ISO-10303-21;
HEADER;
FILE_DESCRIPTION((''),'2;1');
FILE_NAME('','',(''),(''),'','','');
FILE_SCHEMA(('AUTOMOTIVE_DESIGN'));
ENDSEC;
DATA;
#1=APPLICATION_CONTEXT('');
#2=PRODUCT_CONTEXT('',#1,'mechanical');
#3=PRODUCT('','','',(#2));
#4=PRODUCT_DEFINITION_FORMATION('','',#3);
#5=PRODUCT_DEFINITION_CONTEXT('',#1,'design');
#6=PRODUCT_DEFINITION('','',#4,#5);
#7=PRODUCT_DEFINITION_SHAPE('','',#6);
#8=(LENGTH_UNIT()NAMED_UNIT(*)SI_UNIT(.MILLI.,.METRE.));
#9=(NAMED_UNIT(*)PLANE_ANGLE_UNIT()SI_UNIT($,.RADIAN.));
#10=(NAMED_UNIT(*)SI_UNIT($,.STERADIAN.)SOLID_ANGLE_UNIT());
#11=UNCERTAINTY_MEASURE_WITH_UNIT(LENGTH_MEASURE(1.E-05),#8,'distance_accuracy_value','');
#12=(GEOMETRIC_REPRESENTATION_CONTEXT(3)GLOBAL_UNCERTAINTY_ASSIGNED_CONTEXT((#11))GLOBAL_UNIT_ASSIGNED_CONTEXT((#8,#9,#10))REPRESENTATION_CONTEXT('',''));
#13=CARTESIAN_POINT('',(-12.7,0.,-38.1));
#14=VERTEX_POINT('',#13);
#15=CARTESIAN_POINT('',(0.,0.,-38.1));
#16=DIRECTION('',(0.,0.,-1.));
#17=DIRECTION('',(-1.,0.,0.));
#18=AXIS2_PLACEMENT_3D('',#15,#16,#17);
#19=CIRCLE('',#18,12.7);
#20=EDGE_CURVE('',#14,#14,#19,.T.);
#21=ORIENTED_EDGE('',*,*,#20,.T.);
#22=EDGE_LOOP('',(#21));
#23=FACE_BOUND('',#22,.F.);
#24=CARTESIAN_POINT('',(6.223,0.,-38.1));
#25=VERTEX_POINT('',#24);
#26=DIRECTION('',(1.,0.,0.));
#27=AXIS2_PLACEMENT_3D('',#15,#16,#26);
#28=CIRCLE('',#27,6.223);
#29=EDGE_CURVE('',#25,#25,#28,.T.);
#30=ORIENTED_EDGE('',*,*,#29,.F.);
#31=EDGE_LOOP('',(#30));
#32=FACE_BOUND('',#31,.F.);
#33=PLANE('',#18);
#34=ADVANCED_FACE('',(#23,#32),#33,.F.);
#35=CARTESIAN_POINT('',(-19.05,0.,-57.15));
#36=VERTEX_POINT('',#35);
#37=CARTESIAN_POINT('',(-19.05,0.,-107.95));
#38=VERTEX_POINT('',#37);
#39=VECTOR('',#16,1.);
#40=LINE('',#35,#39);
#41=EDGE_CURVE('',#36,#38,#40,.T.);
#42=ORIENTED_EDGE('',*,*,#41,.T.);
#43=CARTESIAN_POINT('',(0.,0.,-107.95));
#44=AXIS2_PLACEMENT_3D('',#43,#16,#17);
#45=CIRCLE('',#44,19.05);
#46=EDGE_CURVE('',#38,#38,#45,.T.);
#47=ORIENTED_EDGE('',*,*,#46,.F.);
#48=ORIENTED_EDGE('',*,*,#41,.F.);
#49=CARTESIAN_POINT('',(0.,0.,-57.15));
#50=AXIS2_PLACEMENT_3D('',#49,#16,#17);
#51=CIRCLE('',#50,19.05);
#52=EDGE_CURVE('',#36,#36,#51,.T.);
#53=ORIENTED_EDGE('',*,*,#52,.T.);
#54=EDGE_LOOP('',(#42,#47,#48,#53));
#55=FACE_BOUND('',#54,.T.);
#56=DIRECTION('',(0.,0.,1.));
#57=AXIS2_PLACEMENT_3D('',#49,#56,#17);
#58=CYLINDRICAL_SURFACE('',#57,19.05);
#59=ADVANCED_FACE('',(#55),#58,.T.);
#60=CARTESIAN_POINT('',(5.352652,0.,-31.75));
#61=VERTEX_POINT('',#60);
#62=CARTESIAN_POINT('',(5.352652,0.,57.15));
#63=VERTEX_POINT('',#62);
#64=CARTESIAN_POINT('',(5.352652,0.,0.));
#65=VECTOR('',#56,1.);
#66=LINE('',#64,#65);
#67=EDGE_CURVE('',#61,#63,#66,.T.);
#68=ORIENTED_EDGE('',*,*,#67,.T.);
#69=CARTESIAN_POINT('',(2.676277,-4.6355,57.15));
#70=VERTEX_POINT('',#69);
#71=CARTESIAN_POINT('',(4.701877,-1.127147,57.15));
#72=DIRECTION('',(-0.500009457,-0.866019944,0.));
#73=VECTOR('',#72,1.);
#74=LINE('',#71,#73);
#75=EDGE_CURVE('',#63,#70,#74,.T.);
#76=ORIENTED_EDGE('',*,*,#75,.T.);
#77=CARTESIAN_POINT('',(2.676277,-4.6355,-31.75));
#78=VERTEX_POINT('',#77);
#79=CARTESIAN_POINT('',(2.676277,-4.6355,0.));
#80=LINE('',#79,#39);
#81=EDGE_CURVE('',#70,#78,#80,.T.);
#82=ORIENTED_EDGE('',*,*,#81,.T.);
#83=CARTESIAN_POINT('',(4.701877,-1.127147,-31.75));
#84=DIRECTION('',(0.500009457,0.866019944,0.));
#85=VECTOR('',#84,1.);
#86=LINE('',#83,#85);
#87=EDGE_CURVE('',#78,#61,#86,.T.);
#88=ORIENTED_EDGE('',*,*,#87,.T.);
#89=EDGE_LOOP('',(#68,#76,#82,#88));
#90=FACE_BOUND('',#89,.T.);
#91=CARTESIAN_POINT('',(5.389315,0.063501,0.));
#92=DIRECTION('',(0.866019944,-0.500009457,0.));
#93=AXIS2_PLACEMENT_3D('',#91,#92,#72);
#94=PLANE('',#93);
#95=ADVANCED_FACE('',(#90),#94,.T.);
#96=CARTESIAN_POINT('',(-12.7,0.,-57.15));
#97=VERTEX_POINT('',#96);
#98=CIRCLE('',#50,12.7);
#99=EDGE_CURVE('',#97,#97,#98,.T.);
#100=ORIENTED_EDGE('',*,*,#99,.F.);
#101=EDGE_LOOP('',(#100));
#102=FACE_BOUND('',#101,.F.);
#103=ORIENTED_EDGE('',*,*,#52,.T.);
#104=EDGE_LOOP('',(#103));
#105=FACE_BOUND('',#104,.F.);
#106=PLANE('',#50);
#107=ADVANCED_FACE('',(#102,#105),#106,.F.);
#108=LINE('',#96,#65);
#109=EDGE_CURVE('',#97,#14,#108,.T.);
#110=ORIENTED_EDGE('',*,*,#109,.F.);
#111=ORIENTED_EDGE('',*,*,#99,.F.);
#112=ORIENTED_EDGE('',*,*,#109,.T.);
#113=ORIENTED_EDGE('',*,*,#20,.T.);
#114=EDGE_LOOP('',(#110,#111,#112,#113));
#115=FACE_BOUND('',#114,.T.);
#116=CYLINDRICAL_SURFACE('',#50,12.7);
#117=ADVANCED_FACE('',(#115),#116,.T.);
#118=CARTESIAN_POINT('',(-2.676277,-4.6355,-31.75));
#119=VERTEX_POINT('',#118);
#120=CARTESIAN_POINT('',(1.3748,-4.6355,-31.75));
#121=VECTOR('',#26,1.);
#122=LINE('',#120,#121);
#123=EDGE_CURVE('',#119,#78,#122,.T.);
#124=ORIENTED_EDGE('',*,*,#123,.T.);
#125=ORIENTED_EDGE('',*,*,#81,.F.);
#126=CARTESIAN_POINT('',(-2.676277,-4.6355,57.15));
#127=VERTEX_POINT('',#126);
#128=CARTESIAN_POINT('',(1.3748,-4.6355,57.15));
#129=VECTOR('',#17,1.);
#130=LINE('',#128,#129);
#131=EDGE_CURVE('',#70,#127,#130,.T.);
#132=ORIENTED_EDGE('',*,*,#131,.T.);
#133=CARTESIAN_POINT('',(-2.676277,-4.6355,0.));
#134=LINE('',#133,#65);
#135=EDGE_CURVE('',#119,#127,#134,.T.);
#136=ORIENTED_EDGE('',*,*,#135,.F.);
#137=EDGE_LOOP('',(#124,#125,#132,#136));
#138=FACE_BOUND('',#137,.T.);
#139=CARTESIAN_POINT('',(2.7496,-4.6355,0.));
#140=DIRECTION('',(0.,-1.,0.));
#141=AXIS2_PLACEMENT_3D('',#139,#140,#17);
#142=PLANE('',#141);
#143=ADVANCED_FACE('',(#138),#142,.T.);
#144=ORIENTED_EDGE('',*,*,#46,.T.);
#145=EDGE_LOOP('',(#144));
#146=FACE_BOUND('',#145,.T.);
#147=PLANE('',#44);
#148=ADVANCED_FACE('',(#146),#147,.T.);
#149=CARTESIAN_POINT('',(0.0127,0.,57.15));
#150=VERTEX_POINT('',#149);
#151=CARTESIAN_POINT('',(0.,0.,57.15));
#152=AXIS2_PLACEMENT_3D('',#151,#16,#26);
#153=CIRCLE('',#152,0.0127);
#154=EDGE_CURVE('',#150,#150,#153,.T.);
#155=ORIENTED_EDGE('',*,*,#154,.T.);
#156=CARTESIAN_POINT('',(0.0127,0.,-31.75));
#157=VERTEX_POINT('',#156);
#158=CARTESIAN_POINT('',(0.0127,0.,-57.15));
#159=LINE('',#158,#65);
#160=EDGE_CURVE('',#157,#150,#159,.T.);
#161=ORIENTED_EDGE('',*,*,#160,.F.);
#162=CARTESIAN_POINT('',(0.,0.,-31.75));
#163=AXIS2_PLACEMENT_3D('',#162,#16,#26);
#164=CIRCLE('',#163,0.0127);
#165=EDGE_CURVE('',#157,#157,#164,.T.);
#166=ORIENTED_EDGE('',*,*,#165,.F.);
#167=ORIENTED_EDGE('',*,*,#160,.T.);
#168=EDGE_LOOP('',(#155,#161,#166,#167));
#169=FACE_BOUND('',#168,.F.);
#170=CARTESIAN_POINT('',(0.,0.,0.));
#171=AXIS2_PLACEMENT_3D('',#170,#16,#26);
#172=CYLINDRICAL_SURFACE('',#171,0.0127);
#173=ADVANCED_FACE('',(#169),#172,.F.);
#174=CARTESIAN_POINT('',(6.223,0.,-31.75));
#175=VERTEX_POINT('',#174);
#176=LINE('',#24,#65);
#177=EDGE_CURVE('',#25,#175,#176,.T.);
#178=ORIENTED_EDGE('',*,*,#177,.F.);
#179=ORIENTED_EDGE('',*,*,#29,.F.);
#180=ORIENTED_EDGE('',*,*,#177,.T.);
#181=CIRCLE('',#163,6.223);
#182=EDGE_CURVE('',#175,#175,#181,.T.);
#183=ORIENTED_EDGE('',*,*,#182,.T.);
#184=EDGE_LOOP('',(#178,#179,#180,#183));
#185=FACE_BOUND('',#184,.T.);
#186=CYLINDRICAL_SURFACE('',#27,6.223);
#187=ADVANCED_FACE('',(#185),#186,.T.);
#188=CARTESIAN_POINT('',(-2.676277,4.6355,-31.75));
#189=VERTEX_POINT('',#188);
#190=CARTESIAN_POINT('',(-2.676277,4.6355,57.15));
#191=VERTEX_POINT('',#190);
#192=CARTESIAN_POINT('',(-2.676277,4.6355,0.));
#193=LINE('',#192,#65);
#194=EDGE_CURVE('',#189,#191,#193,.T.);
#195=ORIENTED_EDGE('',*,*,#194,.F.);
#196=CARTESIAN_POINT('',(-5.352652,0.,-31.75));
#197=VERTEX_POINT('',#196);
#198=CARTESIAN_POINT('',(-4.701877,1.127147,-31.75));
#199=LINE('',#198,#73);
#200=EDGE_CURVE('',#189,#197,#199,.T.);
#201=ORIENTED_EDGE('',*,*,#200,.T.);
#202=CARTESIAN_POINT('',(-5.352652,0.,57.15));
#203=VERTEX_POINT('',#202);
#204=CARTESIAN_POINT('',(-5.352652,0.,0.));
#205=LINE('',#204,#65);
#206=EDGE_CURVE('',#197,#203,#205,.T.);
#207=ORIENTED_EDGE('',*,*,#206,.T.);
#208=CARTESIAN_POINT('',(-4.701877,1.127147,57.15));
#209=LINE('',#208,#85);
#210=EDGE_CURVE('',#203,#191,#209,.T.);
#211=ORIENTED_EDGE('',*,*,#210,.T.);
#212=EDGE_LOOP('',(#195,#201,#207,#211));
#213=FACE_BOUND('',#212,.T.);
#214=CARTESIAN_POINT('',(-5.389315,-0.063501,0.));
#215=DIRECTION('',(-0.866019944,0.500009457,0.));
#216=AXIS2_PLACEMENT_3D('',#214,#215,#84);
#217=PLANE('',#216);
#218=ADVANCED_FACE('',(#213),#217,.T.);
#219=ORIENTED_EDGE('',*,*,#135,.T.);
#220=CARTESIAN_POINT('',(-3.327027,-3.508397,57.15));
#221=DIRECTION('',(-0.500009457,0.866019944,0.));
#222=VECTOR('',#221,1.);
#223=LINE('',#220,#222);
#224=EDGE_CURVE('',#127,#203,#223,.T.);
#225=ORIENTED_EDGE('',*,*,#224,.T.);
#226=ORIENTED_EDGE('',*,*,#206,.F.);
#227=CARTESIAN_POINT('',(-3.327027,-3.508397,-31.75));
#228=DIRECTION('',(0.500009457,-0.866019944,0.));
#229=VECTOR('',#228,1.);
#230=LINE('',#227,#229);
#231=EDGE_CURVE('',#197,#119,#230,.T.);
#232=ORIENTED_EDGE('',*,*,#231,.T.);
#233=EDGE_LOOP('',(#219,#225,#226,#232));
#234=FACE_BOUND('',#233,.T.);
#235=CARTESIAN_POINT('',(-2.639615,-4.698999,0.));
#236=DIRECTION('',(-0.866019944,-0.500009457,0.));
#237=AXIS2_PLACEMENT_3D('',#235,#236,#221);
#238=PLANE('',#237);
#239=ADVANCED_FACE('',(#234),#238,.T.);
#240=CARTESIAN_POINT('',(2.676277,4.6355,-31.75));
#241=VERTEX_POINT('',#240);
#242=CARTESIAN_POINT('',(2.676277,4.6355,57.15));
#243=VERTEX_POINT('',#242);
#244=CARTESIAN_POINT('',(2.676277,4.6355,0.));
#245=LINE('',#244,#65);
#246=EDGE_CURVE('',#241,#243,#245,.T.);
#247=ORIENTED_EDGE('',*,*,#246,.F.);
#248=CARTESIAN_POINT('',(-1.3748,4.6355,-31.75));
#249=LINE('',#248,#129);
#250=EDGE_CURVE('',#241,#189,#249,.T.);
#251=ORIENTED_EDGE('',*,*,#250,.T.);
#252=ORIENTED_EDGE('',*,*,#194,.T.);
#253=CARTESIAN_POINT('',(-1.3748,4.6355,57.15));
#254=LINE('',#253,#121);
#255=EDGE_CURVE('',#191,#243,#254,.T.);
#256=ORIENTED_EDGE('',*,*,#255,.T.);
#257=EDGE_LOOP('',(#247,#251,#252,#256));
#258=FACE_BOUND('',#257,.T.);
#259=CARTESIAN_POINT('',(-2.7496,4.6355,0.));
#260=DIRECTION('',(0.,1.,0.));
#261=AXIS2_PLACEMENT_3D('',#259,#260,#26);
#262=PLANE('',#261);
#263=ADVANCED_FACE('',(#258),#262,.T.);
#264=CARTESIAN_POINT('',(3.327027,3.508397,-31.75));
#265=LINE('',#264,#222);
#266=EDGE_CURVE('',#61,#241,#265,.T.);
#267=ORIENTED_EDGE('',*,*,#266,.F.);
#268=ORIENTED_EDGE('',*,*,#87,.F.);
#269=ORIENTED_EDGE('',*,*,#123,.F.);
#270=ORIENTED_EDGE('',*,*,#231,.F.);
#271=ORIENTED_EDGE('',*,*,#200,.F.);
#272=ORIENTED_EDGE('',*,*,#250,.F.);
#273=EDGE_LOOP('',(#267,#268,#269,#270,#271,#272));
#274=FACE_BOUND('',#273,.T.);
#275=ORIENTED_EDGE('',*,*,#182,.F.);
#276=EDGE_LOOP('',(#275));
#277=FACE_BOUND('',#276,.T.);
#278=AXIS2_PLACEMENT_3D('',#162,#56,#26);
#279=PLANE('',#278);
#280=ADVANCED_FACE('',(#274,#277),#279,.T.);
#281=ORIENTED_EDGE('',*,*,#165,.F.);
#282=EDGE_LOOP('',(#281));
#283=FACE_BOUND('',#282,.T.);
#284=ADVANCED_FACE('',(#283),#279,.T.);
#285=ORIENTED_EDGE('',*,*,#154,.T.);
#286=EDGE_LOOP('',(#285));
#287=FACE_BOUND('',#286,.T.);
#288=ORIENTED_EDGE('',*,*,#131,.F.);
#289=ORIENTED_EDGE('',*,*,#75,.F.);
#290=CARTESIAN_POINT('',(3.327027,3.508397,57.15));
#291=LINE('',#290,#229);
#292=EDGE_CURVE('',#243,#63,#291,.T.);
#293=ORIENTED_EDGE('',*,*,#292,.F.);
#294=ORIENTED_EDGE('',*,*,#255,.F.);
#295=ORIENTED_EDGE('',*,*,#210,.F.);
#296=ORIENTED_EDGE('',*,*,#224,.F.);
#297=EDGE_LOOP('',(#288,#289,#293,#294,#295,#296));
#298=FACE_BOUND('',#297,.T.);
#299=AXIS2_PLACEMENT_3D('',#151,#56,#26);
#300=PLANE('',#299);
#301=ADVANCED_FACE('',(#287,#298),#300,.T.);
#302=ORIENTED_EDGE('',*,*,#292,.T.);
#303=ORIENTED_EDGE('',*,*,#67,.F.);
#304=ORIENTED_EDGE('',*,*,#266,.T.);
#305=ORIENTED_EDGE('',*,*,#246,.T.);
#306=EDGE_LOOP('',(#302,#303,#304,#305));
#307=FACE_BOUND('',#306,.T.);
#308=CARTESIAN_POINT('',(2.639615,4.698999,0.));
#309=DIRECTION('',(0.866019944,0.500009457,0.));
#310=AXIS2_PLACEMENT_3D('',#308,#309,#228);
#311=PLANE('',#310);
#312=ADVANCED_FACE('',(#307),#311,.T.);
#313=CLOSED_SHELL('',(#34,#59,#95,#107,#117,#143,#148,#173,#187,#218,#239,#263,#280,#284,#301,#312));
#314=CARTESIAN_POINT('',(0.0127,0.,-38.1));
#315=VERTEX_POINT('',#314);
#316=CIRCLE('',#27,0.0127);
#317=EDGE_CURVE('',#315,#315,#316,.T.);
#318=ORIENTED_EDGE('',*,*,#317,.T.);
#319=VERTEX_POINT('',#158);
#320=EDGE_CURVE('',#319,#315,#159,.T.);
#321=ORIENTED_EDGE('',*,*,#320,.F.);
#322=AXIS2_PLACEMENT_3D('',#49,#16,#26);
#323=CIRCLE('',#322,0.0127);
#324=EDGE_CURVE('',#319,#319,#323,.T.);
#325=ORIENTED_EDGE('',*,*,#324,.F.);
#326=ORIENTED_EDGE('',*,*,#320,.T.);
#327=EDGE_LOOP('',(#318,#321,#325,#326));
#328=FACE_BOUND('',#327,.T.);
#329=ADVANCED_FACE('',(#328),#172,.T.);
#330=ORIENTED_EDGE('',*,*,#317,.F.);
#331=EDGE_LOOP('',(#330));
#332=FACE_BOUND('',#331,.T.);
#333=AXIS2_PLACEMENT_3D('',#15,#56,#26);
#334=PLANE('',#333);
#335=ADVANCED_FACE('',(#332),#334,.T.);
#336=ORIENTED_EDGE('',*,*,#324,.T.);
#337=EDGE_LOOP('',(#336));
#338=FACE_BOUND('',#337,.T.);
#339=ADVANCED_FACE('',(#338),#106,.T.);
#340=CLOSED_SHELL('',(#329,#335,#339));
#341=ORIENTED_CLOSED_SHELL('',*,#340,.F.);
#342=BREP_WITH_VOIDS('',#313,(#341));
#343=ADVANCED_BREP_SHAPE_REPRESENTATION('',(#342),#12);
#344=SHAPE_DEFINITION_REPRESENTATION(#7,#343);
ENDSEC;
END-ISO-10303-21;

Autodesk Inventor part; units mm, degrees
ref_plane "YZ Plane" through (0, 0, 0) normal (1, 0, 0) x (0, 1, 0)
ref_plane "XZ Plane" through (0, 0, 0) normal (0, 1, 0) x (-1, 0, 0)
ref_plane "XY Plane" through (0, 0, 0) normal (0, 0, 1) x (1, 0, 0)
sketch "Sketch1" plane through (0, 0, 0) normal (0, 0, 1) x (1, 0, 0)
  line L0 (5.4993, 0) -> (2.7496, -4.7625)
  line L1 (2.7496, -4.7625) -> (-2.7496, -4.7625)
  line L2 (-2.7496, -4.7625) -> (-5.4993, 0)
  line L3 (-5.4993, 0) -> (-2.7496, 4.7625)
  line L4 (-2.7496, 4.7625) -> (2.7496, 4.7625)
  line L5 (2.7496, 4.7625) -> (5.4993, 0)
  circle A0 centre (0, 0) radius 0.0127
  dimension "d0" = 9.525
  dimension "d6" = 0.0254
extrude "Extrusion2" add sketch "Sketch1" along normal mid plane 114.3
sketch "Sketch4" plane through (0, 0, -57.15) normal (0, 0, -1) x (-1, 0, 0)
  circle A0 centre (0, 0) radius 0.0127 projected
  circle A1 centre (0, 0) radius 12.7
  dimension "d10" = 25.4
extrude "Extrusion4" add sketch "Sketch4" against normal blind 19.05
thicken "Reduce Hex Shaft" operation add thickness 0.127 both sides no extend neighbours yes toward (0, -1, 0) faces at (0.9165, 4.7625, -6.35) (4.5827, 1.5875, -6.35) (3.6662, -3.175, -6.35) (-3.6662, 3.175, -6.35) (-4.5827, -1.5875, -6.35) (-0.9165, -4.7625, -6.35)
sketch "Sketch5" plane through (0, 0, -38.1) normal (0, 0, 1) x (1, 0, 0)
  circle A0 centre (0, 0) radius 6.35
  dimension "d15" = 12.7
extrude "Extrusion5" add sketch "Sketch5" along normal blind 6.35
thicken "Reduce Base Bushing" operation add thickness 0.127 both sides no extend neighbours yes toward (-0.9967573, 0.0804666, 0) faces at (6.3294, -0.511, -33.8667)
sketch "Sketch8" plane through (0, 0, -57.15) normal (0, 0, -1) x (-1, 0, 0)
  circle A0 centre (0, 0) radius 19.05
  dimension "d28" = 38.1
extrude "Extrusion7" add sketch "Sketch8" along normal blind 50.8
equation "\"d0\" = hexSize"
equation "\"d4\" = length"
equation "\"d13\" = printOffset"
equation "\"d14\" = printOffset"
equation "\"d15\" = bushingForBaseHole"
equation "\"d16\" = sideOfBase"
equation "\"d20\" = printOffset"
equation "\"d21\" = printOffset"
equation "\"hexSize\" = 9.525"
equation "\"length\" = 114.3"
equation "\"printOffset\" = 0.127"
equation "\"bushingForBaseHole\" = 12.7"
equation "\"sideOfBase\" = 6.35"
properties part number "3_8x6_5-inchHexShaft" material "PC/ABS Plastic"
